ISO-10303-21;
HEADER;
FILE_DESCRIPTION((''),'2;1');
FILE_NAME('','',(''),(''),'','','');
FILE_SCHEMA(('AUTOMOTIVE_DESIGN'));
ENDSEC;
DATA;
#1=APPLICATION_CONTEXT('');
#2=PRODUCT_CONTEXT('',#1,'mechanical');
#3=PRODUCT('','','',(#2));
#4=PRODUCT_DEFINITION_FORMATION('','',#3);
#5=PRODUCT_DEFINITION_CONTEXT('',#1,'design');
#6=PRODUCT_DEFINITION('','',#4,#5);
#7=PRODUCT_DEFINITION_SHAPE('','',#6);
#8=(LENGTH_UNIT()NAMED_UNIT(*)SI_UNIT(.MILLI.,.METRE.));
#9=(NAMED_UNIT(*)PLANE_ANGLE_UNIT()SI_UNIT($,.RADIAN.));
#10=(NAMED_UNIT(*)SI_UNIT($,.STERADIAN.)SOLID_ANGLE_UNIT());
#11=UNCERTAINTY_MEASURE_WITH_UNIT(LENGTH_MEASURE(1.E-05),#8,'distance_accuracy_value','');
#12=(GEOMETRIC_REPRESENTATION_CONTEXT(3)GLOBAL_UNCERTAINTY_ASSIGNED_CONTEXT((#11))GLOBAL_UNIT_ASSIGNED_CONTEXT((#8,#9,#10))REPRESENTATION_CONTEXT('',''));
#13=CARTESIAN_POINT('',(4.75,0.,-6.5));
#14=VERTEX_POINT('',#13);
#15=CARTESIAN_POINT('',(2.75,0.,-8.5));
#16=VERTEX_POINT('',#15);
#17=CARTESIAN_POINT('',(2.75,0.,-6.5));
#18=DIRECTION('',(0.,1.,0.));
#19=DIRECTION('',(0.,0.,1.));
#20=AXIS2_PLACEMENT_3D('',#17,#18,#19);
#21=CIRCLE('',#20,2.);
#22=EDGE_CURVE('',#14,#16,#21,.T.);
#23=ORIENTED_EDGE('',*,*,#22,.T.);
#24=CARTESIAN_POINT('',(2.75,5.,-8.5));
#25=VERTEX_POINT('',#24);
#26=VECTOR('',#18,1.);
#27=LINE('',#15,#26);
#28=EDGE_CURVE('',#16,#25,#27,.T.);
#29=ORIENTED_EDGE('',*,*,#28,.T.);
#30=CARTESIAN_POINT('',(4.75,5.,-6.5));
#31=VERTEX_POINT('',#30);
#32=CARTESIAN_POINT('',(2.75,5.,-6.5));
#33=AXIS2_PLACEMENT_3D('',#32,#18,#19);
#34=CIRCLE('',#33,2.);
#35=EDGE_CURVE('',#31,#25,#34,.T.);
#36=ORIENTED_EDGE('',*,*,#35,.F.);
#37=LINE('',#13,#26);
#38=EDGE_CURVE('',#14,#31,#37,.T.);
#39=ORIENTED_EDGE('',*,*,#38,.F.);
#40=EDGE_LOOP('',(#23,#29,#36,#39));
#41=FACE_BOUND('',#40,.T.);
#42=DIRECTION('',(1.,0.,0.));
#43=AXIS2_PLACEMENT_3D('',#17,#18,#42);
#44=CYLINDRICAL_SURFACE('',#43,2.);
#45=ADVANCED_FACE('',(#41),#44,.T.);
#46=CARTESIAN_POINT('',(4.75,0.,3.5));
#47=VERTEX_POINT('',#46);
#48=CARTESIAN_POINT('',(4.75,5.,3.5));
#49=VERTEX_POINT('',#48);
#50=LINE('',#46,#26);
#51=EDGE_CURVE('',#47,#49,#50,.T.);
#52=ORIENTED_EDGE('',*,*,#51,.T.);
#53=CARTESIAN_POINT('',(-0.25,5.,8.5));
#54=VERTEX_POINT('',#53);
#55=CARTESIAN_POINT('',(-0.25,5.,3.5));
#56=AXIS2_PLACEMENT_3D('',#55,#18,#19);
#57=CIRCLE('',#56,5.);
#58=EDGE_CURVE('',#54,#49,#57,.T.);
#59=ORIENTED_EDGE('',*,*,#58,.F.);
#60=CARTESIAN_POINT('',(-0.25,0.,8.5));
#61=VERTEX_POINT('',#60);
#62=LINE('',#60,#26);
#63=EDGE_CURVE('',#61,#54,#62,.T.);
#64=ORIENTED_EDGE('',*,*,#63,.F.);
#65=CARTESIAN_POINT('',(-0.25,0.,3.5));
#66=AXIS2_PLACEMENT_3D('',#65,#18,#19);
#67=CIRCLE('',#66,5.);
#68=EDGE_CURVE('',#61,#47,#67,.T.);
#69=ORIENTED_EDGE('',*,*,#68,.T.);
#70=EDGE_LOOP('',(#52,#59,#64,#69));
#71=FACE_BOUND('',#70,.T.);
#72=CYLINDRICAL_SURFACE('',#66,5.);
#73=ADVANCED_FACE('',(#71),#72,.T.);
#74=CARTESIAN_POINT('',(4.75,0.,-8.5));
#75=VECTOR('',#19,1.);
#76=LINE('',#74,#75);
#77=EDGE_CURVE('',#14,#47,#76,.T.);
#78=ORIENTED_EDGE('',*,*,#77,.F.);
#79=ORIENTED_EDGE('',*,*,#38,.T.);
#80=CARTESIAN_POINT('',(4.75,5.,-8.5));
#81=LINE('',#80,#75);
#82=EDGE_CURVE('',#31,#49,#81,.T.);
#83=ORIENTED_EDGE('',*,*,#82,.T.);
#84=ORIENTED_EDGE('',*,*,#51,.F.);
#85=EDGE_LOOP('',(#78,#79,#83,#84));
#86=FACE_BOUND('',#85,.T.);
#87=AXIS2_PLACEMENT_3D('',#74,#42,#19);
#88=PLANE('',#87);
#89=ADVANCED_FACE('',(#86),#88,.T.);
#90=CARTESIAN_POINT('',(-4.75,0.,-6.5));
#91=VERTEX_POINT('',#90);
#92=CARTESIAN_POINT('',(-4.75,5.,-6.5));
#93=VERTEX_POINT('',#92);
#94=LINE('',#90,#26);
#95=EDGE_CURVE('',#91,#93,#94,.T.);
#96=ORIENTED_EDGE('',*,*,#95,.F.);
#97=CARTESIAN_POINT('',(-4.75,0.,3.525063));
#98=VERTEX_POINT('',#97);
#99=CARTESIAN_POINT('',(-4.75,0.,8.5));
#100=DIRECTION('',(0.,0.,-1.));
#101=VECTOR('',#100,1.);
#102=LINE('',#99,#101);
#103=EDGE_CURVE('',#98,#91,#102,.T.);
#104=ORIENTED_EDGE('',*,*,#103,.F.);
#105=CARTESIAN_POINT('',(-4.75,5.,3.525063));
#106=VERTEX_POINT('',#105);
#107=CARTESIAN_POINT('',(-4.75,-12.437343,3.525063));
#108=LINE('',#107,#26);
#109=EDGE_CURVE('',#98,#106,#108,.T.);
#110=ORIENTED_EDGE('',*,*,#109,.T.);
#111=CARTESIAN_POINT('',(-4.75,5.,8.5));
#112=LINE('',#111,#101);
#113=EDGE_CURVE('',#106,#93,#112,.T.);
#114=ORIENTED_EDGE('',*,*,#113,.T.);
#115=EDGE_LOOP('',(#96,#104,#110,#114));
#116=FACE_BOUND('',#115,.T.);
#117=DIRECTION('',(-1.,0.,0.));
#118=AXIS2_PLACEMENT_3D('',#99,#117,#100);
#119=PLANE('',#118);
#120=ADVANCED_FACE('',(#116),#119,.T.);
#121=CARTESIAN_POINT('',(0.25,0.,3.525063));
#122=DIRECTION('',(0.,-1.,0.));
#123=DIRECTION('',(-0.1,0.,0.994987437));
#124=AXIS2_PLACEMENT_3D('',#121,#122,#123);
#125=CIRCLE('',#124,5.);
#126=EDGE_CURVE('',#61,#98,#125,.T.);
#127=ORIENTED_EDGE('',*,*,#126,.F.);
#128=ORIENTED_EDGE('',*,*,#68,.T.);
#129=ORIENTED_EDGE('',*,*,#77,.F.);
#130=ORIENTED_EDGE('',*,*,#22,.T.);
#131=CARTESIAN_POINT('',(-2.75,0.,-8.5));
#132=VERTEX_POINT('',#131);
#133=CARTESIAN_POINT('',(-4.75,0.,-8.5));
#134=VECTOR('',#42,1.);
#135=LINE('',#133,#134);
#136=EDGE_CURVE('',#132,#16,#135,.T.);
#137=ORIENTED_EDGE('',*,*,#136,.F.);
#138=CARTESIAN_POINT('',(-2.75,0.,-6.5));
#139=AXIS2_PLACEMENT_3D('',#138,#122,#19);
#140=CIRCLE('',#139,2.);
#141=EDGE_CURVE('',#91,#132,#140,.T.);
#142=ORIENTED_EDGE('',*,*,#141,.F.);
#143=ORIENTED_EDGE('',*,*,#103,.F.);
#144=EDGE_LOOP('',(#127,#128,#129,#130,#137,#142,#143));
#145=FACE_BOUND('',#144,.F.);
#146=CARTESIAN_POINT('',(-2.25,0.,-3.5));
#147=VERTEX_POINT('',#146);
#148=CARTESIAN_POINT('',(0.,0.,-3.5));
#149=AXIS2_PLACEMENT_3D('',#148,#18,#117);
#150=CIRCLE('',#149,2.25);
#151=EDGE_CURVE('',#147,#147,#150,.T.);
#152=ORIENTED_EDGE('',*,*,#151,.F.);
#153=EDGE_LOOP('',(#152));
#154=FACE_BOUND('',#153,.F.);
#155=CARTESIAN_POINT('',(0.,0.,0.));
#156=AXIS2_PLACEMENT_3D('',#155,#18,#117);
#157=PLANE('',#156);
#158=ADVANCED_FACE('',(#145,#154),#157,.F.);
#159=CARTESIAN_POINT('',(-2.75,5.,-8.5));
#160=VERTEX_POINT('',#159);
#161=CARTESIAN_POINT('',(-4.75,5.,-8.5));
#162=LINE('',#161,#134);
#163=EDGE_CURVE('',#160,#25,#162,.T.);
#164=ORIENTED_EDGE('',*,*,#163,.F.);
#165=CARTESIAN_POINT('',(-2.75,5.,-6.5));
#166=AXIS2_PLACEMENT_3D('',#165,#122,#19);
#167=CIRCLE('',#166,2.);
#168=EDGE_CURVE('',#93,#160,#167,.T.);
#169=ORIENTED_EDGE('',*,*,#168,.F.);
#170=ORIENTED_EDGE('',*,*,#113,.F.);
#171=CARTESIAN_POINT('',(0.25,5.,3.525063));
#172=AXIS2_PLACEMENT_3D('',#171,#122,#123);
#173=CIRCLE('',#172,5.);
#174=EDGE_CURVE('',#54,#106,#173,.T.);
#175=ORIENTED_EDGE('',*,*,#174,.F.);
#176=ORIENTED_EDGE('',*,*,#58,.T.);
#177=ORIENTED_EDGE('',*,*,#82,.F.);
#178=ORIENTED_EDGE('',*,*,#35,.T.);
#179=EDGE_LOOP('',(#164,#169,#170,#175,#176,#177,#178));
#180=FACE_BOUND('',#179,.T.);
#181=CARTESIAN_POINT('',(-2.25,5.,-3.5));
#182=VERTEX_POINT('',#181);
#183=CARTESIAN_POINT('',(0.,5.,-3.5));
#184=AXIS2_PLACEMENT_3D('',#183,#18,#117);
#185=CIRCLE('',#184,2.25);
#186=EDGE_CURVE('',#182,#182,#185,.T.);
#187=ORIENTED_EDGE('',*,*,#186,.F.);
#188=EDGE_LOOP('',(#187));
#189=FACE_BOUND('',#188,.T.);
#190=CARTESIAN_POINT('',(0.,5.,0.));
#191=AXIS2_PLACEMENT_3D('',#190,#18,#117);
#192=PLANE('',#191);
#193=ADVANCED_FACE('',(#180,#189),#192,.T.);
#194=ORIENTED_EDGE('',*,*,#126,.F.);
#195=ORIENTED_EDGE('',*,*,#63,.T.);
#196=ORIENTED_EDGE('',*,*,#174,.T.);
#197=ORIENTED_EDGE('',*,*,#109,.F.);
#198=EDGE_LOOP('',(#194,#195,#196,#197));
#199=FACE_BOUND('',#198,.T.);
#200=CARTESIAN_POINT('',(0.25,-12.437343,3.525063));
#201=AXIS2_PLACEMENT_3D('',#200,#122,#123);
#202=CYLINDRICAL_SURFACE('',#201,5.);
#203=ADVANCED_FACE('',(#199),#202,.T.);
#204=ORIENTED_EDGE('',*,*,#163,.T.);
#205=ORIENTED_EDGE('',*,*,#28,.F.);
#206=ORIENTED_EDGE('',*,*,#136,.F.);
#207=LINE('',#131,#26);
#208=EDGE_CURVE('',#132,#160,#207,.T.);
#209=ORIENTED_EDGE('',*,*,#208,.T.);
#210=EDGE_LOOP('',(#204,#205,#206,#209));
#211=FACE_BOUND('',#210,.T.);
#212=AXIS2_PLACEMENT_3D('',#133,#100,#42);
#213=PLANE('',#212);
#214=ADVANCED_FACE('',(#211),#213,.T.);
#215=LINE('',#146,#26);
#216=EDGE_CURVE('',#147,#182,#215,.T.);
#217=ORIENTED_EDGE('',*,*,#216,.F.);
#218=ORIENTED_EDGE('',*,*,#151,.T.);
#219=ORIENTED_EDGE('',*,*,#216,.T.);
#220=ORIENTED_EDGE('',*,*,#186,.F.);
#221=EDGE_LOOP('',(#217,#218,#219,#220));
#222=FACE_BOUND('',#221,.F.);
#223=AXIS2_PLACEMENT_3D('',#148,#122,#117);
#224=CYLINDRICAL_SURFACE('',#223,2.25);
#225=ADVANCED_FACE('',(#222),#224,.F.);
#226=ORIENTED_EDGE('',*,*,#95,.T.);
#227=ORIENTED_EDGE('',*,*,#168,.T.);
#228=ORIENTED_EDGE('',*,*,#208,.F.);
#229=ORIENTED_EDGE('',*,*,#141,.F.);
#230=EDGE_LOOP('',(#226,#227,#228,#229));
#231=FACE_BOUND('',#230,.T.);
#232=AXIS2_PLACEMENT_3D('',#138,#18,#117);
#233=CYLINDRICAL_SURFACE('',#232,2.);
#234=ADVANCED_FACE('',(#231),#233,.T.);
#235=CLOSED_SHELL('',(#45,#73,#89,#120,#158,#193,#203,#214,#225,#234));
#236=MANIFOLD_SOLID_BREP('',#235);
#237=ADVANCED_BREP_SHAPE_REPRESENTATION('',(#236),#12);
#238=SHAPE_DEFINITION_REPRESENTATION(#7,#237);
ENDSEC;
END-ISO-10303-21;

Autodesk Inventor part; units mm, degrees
ref_plane "YZ Plane" through (0, 0, 0) normal (1, 0, 0) x (0, 1, 0)
ref_plane "XZ Plane" through (0, 0, 0) normal (0, 1, 0) x (-1, 0, 0)
ref_plane "XY Plane" through (0, 0, 0) normal (0, 0, 1) x (1, 0, 0)
sketch "Sketch1" plane through (0, 0, 0) normal (0, 1, 0) x (-1, 0, 0)
  line L0 (-4.75, 8.5) -> (4.75, 8.5)
  line L1 (4.75, 8.5) -> (4.75, -8.5)
  line L2 (4.75, -8.5) -> (-4.75, -8.5)
  line L3 (-4.75, -8.5) -> (-4.75, 8.5)
  line L4 (-4.75, 8.5) -> (4.75, -8.5) construction
  line L5 (4.75, 8.5) -> (-4.75, -8.5) construction
  line L6 (0, -8.5) -> (0, -3.5) construction
  circle A0 centre (0, -3.5) radius 2.25
  point P0 (0, 0)
  dimension "d2" = 9.5
  dimension "d3" = 17
  dimension "d4" = 5
  dimension "d5" = 4.5
extrude "Extrusion1" add sketch "Sketch1" along normal blind 5
fillet "Fillet1" radius 5 1 edges at (4.75, 2.5, 8.5)
fillet "Fillet2" radius 5 1 edges at (-4.75, 2.5, 8.5)
fillet "Fillet3" radius 2 2 edges at (-4.75, 2.5, -8.5) (4.75, 2.5, -8.5)
properties part number "Clamp"
